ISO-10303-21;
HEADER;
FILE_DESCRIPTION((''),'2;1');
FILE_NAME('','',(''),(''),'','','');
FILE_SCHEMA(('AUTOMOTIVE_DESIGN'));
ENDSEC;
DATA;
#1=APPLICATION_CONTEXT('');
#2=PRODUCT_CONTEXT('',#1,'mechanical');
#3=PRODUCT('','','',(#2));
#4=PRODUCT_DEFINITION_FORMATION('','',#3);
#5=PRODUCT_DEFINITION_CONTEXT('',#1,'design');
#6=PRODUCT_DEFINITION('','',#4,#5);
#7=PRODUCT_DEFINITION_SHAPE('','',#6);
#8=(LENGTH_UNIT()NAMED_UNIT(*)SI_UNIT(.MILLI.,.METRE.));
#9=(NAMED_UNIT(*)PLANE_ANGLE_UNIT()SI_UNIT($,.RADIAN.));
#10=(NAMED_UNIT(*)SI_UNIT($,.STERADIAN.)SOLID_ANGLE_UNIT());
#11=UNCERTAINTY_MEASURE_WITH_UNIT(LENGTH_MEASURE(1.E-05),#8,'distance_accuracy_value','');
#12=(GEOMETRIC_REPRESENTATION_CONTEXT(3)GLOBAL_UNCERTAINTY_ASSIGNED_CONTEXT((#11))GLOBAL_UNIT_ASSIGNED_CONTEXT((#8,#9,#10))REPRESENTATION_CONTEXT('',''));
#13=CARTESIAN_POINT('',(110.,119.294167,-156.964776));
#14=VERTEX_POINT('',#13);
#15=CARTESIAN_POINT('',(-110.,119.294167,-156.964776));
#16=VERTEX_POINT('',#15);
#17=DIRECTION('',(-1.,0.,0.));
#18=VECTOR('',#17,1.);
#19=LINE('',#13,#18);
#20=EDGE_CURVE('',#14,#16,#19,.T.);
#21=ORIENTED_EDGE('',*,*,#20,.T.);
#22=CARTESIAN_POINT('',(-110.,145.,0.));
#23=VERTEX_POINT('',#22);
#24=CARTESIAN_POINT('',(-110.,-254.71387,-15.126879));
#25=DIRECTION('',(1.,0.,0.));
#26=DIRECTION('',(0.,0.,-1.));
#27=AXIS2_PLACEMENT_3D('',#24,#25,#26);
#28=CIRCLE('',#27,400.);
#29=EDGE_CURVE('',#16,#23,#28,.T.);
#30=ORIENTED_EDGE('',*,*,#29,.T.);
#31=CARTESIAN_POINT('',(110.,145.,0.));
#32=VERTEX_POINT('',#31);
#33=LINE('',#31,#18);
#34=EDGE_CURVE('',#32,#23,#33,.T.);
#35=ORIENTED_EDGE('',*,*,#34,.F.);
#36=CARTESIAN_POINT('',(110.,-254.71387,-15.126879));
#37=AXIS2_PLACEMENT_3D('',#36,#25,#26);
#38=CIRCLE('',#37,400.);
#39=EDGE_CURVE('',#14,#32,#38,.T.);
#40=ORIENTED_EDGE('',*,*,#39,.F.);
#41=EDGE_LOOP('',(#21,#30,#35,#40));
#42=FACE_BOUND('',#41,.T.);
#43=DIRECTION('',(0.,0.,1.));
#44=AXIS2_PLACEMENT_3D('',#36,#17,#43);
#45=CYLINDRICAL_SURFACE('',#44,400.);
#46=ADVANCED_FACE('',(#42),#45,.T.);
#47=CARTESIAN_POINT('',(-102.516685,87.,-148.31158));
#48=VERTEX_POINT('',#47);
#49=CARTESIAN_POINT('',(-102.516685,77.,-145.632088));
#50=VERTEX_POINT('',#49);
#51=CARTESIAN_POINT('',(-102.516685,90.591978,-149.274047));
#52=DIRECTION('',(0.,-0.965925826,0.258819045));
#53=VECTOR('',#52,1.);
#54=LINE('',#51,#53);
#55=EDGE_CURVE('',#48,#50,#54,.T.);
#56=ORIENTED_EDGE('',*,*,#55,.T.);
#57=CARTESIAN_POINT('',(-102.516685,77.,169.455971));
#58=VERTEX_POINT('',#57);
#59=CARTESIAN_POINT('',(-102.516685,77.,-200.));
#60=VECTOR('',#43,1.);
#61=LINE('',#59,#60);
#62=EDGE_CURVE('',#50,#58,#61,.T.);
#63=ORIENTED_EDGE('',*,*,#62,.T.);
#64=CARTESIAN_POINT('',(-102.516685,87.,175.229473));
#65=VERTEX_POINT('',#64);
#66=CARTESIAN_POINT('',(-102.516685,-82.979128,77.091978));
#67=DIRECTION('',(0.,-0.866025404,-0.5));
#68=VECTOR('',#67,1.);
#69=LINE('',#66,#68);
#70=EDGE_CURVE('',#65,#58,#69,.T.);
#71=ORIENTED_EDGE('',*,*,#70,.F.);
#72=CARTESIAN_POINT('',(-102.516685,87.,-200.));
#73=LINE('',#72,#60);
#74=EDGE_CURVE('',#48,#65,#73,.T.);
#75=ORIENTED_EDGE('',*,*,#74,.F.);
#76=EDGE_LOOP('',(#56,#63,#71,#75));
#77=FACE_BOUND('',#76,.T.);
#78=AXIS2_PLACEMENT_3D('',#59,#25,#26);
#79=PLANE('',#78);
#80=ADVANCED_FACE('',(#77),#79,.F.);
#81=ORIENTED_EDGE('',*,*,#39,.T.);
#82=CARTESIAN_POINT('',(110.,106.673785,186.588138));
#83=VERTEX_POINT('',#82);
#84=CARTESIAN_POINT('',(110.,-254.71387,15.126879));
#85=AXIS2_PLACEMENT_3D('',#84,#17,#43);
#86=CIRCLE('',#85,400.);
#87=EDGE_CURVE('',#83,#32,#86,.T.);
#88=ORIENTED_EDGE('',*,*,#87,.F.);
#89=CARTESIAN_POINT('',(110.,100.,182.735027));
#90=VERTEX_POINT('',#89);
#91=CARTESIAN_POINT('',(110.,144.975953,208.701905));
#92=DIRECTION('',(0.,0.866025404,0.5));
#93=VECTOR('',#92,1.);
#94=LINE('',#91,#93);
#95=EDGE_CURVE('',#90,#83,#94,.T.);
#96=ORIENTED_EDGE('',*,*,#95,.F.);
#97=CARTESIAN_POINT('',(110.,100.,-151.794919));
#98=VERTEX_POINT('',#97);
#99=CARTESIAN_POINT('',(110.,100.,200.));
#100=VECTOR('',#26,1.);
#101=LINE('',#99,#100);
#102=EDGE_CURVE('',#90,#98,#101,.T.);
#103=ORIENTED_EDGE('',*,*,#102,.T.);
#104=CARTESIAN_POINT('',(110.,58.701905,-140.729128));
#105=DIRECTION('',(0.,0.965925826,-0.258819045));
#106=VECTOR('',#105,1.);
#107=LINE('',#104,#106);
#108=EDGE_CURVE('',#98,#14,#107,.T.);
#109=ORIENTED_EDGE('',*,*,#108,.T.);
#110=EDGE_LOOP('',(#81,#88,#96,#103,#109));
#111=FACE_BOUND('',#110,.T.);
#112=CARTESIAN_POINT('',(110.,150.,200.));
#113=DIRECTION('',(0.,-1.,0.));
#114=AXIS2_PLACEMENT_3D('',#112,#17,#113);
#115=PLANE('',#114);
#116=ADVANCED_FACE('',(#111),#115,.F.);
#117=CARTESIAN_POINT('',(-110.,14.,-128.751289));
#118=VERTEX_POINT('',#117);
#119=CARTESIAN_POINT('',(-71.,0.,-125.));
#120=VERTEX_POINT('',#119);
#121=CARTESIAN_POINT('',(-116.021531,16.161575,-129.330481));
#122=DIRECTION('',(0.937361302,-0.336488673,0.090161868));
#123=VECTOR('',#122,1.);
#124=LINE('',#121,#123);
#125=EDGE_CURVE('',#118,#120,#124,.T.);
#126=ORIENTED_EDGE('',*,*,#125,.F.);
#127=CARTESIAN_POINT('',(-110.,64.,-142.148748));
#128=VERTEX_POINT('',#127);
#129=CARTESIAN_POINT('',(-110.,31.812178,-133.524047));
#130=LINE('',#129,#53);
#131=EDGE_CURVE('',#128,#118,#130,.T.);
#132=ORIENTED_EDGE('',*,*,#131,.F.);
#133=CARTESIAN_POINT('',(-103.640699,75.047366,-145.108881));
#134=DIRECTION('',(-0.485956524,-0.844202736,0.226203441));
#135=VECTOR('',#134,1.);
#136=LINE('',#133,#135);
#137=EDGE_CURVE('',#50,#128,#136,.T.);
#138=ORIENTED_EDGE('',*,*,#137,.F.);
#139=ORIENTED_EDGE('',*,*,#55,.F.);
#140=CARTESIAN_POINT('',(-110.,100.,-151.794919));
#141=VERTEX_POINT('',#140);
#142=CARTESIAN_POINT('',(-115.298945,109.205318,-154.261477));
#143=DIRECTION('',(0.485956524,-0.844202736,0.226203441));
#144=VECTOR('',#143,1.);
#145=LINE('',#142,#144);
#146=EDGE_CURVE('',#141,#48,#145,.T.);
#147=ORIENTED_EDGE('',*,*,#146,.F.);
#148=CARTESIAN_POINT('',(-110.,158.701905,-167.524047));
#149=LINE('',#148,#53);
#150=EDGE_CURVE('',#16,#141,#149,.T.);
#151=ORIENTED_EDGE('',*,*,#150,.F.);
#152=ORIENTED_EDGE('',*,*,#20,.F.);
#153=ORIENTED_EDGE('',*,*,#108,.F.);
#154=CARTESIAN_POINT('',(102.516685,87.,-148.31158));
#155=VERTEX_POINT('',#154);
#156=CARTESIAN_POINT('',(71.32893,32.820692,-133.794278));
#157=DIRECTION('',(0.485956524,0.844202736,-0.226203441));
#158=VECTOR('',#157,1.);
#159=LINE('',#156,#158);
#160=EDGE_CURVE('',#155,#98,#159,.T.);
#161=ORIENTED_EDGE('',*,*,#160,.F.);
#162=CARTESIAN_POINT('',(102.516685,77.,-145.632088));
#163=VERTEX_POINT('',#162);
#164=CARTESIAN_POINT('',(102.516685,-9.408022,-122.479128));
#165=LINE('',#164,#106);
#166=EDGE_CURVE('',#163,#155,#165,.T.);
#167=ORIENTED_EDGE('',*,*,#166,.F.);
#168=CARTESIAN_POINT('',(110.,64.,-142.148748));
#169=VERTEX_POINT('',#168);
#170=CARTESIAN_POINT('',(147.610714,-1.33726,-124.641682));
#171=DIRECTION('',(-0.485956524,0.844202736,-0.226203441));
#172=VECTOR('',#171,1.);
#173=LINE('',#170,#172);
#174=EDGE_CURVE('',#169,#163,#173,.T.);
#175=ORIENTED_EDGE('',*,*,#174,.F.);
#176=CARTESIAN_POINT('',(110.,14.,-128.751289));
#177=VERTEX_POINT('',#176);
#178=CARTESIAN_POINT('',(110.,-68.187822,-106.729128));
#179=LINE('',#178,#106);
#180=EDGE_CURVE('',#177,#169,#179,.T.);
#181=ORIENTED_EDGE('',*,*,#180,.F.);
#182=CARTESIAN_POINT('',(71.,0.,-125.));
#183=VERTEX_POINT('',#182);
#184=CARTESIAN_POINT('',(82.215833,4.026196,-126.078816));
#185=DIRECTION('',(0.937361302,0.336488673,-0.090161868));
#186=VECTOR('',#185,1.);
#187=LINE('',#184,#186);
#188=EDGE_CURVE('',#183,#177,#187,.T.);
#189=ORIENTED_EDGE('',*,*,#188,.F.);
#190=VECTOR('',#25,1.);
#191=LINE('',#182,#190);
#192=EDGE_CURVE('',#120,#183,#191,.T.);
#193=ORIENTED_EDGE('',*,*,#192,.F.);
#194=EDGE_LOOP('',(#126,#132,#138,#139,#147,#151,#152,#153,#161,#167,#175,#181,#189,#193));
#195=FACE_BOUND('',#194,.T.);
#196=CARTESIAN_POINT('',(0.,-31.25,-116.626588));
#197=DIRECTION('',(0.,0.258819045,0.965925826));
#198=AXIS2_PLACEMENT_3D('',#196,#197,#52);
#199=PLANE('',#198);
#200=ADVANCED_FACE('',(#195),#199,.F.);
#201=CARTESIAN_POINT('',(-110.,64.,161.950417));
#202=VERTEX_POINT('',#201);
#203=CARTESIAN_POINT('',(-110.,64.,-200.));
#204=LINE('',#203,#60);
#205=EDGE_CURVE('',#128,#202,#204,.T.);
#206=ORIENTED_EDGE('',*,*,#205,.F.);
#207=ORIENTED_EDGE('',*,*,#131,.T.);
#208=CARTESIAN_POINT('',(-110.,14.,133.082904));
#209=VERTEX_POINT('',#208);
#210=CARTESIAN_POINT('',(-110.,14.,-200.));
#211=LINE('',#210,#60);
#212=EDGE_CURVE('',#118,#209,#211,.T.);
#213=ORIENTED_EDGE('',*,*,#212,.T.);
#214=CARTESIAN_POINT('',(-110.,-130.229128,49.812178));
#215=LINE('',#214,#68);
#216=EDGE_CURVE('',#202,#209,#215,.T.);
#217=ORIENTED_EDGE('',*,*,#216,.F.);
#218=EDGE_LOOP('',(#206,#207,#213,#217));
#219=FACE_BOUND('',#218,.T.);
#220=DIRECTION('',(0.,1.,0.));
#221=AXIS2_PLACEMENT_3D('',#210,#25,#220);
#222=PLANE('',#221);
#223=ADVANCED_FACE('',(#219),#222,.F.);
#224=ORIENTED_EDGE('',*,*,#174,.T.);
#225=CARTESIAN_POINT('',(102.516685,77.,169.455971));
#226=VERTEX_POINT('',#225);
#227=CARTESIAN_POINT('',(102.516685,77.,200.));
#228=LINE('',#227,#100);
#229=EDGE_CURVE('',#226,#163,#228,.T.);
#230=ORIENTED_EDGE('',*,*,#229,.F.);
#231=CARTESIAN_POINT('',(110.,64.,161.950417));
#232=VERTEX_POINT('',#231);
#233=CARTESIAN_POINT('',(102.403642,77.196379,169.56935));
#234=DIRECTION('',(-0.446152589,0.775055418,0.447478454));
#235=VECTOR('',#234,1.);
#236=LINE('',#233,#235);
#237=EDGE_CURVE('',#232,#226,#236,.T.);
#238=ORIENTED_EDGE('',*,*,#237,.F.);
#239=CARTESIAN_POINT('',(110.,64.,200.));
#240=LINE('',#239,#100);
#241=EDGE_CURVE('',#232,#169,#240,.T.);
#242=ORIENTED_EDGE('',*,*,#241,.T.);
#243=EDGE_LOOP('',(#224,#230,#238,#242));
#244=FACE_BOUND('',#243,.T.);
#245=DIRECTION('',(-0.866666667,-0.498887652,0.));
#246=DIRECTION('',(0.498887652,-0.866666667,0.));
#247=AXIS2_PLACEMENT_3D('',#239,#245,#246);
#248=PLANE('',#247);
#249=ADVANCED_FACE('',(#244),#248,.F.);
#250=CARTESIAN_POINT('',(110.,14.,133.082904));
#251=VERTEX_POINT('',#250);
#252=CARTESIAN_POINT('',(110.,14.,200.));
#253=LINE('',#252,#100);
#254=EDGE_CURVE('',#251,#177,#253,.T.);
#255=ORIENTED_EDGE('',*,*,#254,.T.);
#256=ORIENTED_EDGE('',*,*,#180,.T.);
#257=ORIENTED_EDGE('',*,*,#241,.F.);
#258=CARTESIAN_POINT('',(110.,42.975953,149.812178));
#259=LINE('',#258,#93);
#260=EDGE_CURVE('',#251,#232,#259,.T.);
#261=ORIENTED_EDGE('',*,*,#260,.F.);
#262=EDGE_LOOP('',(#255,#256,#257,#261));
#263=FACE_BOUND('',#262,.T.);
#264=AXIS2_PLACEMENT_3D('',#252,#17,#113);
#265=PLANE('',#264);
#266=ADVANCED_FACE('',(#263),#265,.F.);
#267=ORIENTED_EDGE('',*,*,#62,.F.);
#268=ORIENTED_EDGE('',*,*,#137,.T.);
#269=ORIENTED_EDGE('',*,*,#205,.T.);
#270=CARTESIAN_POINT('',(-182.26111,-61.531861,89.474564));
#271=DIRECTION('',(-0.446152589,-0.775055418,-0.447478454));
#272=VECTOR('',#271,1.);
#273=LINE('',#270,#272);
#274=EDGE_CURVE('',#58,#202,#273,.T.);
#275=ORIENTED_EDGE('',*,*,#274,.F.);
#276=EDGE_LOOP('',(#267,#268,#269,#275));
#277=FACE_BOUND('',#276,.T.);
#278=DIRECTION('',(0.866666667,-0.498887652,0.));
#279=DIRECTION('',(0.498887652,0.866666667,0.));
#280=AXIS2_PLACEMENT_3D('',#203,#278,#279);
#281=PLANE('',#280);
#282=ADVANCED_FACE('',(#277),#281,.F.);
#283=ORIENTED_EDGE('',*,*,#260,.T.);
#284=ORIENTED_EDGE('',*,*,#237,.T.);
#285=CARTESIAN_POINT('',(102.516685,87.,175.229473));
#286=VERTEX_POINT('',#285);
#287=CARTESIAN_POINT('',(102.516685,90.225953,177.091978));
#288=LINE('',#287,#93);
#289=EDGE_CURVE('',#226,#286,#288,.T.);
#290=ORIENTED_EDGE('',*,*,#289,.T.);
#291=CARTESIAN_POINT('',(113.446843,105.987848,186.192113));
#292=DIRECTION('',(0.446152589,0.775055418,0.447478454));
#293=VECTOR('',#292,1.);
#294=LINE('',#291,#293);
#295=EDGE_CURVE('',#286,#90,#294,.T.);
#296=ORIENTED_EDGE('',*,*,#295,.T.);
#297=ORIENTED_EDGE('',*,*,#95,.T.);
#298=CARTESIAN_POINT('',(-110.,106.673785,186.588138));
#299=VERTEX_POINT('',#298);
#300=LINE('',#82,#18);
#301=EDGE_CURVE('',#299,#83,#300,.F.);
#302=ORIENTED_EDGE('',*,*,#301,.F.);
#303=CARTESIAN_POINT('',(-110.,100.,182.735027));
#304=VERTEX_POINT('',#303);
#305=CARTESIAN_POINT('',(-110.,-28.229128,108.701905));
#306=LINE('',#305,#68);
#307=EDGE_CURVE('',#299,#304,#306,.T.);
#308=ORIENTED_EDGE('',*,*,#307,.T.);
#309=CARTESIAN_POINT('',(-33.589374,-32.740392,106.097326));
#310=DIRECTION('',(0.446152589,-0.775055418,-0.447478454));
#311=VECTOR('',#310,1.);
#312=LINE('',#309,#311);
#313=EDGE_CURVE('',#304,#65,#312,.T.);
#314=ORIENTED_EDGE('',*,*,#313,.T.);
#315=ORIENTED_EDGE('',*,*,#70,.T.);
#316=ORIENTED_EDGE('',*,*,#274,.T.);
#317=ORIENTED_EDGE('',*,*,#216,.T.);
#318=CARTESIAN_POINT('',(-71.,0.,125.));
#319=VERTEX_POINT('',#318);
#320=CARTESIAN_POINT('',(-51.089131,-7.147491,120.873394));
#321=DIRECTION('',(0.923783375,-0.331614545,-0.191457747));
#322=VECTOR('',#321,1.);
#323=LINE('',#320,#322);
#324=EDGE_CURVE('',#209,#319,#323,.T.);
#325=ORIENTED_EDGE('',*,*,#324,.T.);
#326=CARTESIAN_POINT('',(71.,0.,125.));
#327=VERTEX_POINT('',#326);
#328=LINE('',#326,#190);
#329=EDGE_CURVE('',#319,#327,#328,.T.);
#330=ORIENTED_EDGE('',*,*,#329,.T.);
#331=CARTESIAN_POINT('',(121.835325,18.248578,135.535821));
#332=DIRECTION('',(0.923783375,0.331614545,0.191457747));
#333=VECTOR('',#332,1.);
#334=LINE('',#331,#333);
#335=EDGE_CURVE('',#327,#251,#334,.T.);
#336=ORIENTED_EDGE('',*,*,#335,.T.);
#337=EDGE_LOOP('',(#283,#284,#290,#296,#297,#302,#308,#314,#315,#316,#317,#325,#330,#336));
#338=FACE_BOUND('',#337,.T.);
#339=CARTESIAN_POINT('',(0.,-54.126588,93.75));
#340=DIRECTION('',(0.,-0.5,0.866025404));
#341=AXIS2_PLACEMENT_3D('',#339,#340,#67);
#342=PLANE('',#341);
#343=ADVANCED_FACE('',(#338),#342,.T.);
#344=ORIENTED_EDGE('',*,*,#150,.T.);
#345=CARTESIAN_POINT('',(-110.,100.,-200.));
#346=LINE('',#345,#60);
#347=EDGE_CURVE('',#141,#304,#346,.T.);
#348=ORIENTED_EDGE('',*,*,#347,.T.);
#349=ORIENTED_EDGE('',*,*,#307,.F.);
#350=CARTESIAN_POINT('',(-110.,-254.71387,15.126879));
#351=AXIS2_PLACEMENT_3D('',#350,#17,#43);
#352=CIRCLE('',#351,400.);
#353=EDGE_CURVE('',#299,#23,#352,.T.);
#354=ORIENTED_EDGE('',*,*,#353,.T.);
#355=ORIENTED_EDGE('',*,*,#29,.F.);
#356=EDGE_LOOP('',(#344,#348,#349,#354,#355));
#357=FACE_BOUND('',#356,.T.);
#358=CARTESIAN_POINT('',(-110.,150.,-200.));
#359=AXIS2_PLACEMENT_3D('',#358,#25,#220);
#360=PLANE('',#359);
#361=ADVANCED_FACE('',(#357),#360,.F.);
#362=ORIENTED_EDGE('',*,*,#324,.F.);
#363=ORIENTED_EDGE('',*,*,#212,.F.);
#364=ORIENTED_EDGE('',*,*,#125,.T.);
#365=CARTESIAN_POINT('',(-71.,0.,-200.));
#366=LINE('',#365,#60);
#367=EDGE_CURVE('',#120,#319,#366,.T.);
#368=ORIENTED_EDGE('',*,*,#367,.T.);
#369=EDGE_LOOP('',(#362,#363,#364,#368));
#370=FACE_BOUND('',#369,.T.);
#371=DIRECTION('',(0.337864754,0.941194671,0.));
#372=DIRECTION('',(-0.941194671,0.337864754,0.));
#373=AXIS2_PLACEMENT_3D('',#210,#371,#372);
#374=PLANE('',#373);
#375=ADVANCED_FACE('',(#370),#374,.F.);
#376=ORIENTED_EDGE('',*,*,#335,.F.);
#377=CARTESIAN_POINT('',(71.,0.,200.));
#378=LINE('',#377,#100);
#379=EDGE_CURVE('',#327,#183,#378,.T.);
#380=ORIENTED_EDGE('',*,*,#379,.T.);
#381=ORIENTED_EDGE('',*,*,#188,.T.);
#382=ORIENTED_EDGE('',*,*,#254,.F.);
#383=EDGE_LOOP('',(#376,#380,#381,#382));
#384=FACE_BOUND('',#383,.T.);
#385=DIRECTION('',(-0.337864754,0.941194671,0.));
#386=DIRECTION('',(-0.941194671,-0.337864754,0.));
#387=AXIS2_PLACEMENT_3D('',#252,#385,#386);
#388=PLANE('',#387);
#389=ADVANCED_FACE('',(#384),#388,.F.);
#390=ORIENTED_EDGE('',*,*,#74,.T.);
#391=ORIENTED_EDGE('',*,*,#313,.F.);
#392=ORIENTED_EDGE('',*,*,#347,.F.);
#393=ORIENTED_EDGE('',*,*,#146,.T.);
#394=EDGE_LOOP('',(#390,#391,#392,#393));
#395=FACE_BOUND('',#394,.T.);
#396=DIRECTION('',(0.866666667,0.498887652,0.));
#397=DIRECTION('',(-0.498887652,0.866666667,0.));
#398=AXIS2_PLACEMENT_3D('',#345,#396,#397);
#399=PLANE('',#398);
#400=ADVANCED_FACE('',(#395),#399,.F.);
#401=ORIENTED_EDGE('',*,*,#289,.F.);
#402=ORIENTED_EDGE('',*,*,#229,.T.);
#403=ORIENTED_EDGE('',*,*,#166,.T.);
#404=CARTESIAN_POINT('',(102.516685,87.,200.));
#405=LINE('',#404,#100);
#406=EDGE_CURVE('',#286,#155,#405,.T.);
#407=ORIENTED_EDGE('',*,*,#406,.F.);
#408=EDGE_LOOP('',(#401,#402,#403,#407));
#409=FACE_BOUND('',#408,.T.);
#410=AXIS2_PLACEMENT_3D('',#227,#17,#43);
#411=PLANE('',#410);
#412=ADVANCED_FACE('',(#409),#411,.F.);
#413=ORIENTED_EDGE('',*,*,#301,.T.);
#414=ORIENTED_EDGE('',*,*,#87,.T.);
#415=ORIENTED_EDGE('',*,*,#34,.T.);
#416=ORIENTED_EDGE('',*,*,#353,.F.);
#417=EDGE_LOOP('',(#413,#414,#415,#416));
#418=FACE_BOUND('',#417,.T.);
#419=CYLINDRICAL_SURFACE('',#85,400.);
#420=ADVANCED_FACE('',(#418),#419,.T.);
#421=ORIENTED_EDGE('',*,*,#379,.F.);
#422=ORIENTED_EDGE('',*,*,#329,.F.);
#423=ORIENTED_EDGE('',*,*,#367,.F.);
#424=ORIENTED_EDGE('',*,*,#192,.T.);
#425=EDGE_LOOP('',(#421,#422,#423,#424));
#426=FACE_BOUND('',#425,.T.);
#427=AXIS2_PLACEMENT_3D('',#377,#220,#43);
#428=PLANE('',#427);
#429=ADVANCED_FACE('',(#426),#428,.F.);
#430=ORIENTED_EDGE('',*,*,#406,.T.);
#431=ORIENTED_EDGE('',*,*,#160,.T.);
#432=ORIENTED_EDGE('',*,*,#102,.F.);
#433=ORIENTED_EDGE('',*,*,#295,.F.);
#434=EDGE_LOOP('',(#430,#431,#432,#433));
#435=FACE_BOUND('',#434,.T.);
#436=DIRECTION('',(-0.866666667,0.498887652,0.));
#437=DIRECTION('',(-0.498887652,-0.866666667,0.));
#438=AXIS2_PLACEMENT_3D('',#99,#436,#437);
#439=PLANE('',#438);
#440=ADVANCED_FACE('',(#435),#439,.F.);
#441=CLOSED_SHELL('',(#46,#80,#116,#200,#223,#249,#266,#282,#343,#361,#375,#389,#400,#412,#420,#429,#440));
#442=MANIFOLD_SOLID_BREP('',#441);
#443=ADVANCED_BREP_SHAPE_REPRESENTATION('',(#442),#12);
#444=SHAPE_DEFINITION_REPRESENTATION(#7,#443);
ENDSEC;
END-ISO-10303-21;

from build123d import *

# Parameters (mm, degrees)
BOSS_EXTRU_1_DEPTH      = 200
ENL_V_MAT_EXTRU_1_DEPTH = 274.130005675
SYM_TRIE2_COPY_1_DEPTH  = 200
SYM_TRIE2_COPY_2_DEPTH  = 274.130005675
SYM_TRIE2_COPY_3_DEPTH  = 274.130005675
INTERSECT1_START        = -110
INTERSECT1_DEPTH        = 220


# Read off the part's stored shape, not the designer's step: Intersect1
with BuildPart() as part:
    # Esquisse1 → Boss.-Extru.1 (new body)
    with BuildSketch(Plane.XY):
        Polygon((0, 0), (0, 150), (110, 150), (110, 100), (102.516685226, 87), (102.516685226, 77), (110, 64), (110, 14), (71, 0), align=None)
    boss_extru_1 = extrude(amount=BOSS_EXTRU_1_DEPTH)

    # Esquisse5 → Enlèv. mat.-Extru.1 (cut, symmetric)
    with BuildSketch(Plane(origin=(0, 0, 0), x_dir=(0, 0, -1), z_dir=(1, 0, 0))):
        with BuildLine():
            Line((0, 150), (-200, 150))
            Line((-200, 150), (-200, 100))
            ThreePointArc((-200, 100), (-102.931757397, 135.530032876), (0, 145))
            Line((0, 145), (0, 150))
        make_face()
    enl_v_mat_extru_1 = extrude(amount=ENL_V_MAT_EXTRU_1_DEPTH, both=True, mode=Mode.SUBTRACT)

    # Symétrie1: Boss.-Extru.1, Enlèv. mat.-Extru.1 across plane
    add(boss_extru_1.mirror(Plane.XY))
    add(enl_v_mat_extru_1.mirror(Plane.XY), mode=Mode.SUBTRACT)

    # Symétrie2: Boss.-Extru.1 across plane
    add(boss_extru_1.mirror(Plane(origin=(0, 0, 0), x_dir=(0, 0, 1), z_dir=(1, 0, 0))))

    # Symétrie2 copy 1 sketch → Symétrie2 copy 1 (add)
    with BuildSketch(Plane(origin=(0, 0, 0), x_dir=(-1, 0, 0), z_dir=(0, 0, -1))):
        Polygon((0, 0), (0, 150), (110, 150), (110, 100), (102.516685226, 87), (102.516685226, 77), (110, 64), (110, 14), (71, 0), align=None)
    extrude(amount=SYM_TRIE2_COPY_1_DEPTH)

    # Symétrie2 copy 2 sketch → Symétrie2 copy 2 (cut, symmetric)
    with BuildSketch(Plane.ZY):
        with BuildLine():
            Line((0, 150), (-200, 150))
            Line((-200, 150), (-200, 100))
            ThreePointArc((-200, 100), (-102.931757397, 135.530032876), (0, 145))
            Line((0, 145), (0, 150))
        make_face()
    extrude(amount=SYM_TRIE2_COPY_2_DEPTH, both=True, mode=Mode.SUBTRACT)

    # Symétrie2 copy 3 sketch → Symétrie2 copy 3 (cut, symmetric)
    with BuildSketch(Plane(origin=(0, 0, 0), x_dir=(0, 0, -1), z_dir=(-1, 0, 0))):
        with BuildLine():
            Line((0, -150), (-200, -150))
            Line((-200, -150), (-200, -100))
            ThreePointArc((-200, -100), (-102.931757397, -135.530032876), (0, -145))
            Line((0, -145), (0, -150))
        make_face()
    extrude(amount=SYM_TRIE2_COPY_3_DEPTH, both=True, mode=Mode.SUBTRACT)

    # Intersect1 outline → Intersect1 (cut)
    with BuildSketch(Plane.YZ.offset(INTERSECT1_START)):
        with BuildLine():
            ThreePointArc((100, -200), (110.281899779, -178.766997787), (119.294166687, -156.964775625))
            Line((119.294166687, -156.964775625), (0, -125))
            Line((0, -125), (0, -200))
            Line((0, -200), (100, -200))
        make_face()
        with BuildLine():
            Line((0, 200), (0, 125))
            Line((0, 125), (106.673784722, 186.588138325))
            ThreePointArc((106.673784722, 186.588138325), (103.399684527, 193.325314743), (100, 200))
            Line((100, 200), (0, 200))
        make_face()
    extrude(amount=INTERSECT1_DEPTH, mode=Mode.SUBTRACT)


solid = part.part
